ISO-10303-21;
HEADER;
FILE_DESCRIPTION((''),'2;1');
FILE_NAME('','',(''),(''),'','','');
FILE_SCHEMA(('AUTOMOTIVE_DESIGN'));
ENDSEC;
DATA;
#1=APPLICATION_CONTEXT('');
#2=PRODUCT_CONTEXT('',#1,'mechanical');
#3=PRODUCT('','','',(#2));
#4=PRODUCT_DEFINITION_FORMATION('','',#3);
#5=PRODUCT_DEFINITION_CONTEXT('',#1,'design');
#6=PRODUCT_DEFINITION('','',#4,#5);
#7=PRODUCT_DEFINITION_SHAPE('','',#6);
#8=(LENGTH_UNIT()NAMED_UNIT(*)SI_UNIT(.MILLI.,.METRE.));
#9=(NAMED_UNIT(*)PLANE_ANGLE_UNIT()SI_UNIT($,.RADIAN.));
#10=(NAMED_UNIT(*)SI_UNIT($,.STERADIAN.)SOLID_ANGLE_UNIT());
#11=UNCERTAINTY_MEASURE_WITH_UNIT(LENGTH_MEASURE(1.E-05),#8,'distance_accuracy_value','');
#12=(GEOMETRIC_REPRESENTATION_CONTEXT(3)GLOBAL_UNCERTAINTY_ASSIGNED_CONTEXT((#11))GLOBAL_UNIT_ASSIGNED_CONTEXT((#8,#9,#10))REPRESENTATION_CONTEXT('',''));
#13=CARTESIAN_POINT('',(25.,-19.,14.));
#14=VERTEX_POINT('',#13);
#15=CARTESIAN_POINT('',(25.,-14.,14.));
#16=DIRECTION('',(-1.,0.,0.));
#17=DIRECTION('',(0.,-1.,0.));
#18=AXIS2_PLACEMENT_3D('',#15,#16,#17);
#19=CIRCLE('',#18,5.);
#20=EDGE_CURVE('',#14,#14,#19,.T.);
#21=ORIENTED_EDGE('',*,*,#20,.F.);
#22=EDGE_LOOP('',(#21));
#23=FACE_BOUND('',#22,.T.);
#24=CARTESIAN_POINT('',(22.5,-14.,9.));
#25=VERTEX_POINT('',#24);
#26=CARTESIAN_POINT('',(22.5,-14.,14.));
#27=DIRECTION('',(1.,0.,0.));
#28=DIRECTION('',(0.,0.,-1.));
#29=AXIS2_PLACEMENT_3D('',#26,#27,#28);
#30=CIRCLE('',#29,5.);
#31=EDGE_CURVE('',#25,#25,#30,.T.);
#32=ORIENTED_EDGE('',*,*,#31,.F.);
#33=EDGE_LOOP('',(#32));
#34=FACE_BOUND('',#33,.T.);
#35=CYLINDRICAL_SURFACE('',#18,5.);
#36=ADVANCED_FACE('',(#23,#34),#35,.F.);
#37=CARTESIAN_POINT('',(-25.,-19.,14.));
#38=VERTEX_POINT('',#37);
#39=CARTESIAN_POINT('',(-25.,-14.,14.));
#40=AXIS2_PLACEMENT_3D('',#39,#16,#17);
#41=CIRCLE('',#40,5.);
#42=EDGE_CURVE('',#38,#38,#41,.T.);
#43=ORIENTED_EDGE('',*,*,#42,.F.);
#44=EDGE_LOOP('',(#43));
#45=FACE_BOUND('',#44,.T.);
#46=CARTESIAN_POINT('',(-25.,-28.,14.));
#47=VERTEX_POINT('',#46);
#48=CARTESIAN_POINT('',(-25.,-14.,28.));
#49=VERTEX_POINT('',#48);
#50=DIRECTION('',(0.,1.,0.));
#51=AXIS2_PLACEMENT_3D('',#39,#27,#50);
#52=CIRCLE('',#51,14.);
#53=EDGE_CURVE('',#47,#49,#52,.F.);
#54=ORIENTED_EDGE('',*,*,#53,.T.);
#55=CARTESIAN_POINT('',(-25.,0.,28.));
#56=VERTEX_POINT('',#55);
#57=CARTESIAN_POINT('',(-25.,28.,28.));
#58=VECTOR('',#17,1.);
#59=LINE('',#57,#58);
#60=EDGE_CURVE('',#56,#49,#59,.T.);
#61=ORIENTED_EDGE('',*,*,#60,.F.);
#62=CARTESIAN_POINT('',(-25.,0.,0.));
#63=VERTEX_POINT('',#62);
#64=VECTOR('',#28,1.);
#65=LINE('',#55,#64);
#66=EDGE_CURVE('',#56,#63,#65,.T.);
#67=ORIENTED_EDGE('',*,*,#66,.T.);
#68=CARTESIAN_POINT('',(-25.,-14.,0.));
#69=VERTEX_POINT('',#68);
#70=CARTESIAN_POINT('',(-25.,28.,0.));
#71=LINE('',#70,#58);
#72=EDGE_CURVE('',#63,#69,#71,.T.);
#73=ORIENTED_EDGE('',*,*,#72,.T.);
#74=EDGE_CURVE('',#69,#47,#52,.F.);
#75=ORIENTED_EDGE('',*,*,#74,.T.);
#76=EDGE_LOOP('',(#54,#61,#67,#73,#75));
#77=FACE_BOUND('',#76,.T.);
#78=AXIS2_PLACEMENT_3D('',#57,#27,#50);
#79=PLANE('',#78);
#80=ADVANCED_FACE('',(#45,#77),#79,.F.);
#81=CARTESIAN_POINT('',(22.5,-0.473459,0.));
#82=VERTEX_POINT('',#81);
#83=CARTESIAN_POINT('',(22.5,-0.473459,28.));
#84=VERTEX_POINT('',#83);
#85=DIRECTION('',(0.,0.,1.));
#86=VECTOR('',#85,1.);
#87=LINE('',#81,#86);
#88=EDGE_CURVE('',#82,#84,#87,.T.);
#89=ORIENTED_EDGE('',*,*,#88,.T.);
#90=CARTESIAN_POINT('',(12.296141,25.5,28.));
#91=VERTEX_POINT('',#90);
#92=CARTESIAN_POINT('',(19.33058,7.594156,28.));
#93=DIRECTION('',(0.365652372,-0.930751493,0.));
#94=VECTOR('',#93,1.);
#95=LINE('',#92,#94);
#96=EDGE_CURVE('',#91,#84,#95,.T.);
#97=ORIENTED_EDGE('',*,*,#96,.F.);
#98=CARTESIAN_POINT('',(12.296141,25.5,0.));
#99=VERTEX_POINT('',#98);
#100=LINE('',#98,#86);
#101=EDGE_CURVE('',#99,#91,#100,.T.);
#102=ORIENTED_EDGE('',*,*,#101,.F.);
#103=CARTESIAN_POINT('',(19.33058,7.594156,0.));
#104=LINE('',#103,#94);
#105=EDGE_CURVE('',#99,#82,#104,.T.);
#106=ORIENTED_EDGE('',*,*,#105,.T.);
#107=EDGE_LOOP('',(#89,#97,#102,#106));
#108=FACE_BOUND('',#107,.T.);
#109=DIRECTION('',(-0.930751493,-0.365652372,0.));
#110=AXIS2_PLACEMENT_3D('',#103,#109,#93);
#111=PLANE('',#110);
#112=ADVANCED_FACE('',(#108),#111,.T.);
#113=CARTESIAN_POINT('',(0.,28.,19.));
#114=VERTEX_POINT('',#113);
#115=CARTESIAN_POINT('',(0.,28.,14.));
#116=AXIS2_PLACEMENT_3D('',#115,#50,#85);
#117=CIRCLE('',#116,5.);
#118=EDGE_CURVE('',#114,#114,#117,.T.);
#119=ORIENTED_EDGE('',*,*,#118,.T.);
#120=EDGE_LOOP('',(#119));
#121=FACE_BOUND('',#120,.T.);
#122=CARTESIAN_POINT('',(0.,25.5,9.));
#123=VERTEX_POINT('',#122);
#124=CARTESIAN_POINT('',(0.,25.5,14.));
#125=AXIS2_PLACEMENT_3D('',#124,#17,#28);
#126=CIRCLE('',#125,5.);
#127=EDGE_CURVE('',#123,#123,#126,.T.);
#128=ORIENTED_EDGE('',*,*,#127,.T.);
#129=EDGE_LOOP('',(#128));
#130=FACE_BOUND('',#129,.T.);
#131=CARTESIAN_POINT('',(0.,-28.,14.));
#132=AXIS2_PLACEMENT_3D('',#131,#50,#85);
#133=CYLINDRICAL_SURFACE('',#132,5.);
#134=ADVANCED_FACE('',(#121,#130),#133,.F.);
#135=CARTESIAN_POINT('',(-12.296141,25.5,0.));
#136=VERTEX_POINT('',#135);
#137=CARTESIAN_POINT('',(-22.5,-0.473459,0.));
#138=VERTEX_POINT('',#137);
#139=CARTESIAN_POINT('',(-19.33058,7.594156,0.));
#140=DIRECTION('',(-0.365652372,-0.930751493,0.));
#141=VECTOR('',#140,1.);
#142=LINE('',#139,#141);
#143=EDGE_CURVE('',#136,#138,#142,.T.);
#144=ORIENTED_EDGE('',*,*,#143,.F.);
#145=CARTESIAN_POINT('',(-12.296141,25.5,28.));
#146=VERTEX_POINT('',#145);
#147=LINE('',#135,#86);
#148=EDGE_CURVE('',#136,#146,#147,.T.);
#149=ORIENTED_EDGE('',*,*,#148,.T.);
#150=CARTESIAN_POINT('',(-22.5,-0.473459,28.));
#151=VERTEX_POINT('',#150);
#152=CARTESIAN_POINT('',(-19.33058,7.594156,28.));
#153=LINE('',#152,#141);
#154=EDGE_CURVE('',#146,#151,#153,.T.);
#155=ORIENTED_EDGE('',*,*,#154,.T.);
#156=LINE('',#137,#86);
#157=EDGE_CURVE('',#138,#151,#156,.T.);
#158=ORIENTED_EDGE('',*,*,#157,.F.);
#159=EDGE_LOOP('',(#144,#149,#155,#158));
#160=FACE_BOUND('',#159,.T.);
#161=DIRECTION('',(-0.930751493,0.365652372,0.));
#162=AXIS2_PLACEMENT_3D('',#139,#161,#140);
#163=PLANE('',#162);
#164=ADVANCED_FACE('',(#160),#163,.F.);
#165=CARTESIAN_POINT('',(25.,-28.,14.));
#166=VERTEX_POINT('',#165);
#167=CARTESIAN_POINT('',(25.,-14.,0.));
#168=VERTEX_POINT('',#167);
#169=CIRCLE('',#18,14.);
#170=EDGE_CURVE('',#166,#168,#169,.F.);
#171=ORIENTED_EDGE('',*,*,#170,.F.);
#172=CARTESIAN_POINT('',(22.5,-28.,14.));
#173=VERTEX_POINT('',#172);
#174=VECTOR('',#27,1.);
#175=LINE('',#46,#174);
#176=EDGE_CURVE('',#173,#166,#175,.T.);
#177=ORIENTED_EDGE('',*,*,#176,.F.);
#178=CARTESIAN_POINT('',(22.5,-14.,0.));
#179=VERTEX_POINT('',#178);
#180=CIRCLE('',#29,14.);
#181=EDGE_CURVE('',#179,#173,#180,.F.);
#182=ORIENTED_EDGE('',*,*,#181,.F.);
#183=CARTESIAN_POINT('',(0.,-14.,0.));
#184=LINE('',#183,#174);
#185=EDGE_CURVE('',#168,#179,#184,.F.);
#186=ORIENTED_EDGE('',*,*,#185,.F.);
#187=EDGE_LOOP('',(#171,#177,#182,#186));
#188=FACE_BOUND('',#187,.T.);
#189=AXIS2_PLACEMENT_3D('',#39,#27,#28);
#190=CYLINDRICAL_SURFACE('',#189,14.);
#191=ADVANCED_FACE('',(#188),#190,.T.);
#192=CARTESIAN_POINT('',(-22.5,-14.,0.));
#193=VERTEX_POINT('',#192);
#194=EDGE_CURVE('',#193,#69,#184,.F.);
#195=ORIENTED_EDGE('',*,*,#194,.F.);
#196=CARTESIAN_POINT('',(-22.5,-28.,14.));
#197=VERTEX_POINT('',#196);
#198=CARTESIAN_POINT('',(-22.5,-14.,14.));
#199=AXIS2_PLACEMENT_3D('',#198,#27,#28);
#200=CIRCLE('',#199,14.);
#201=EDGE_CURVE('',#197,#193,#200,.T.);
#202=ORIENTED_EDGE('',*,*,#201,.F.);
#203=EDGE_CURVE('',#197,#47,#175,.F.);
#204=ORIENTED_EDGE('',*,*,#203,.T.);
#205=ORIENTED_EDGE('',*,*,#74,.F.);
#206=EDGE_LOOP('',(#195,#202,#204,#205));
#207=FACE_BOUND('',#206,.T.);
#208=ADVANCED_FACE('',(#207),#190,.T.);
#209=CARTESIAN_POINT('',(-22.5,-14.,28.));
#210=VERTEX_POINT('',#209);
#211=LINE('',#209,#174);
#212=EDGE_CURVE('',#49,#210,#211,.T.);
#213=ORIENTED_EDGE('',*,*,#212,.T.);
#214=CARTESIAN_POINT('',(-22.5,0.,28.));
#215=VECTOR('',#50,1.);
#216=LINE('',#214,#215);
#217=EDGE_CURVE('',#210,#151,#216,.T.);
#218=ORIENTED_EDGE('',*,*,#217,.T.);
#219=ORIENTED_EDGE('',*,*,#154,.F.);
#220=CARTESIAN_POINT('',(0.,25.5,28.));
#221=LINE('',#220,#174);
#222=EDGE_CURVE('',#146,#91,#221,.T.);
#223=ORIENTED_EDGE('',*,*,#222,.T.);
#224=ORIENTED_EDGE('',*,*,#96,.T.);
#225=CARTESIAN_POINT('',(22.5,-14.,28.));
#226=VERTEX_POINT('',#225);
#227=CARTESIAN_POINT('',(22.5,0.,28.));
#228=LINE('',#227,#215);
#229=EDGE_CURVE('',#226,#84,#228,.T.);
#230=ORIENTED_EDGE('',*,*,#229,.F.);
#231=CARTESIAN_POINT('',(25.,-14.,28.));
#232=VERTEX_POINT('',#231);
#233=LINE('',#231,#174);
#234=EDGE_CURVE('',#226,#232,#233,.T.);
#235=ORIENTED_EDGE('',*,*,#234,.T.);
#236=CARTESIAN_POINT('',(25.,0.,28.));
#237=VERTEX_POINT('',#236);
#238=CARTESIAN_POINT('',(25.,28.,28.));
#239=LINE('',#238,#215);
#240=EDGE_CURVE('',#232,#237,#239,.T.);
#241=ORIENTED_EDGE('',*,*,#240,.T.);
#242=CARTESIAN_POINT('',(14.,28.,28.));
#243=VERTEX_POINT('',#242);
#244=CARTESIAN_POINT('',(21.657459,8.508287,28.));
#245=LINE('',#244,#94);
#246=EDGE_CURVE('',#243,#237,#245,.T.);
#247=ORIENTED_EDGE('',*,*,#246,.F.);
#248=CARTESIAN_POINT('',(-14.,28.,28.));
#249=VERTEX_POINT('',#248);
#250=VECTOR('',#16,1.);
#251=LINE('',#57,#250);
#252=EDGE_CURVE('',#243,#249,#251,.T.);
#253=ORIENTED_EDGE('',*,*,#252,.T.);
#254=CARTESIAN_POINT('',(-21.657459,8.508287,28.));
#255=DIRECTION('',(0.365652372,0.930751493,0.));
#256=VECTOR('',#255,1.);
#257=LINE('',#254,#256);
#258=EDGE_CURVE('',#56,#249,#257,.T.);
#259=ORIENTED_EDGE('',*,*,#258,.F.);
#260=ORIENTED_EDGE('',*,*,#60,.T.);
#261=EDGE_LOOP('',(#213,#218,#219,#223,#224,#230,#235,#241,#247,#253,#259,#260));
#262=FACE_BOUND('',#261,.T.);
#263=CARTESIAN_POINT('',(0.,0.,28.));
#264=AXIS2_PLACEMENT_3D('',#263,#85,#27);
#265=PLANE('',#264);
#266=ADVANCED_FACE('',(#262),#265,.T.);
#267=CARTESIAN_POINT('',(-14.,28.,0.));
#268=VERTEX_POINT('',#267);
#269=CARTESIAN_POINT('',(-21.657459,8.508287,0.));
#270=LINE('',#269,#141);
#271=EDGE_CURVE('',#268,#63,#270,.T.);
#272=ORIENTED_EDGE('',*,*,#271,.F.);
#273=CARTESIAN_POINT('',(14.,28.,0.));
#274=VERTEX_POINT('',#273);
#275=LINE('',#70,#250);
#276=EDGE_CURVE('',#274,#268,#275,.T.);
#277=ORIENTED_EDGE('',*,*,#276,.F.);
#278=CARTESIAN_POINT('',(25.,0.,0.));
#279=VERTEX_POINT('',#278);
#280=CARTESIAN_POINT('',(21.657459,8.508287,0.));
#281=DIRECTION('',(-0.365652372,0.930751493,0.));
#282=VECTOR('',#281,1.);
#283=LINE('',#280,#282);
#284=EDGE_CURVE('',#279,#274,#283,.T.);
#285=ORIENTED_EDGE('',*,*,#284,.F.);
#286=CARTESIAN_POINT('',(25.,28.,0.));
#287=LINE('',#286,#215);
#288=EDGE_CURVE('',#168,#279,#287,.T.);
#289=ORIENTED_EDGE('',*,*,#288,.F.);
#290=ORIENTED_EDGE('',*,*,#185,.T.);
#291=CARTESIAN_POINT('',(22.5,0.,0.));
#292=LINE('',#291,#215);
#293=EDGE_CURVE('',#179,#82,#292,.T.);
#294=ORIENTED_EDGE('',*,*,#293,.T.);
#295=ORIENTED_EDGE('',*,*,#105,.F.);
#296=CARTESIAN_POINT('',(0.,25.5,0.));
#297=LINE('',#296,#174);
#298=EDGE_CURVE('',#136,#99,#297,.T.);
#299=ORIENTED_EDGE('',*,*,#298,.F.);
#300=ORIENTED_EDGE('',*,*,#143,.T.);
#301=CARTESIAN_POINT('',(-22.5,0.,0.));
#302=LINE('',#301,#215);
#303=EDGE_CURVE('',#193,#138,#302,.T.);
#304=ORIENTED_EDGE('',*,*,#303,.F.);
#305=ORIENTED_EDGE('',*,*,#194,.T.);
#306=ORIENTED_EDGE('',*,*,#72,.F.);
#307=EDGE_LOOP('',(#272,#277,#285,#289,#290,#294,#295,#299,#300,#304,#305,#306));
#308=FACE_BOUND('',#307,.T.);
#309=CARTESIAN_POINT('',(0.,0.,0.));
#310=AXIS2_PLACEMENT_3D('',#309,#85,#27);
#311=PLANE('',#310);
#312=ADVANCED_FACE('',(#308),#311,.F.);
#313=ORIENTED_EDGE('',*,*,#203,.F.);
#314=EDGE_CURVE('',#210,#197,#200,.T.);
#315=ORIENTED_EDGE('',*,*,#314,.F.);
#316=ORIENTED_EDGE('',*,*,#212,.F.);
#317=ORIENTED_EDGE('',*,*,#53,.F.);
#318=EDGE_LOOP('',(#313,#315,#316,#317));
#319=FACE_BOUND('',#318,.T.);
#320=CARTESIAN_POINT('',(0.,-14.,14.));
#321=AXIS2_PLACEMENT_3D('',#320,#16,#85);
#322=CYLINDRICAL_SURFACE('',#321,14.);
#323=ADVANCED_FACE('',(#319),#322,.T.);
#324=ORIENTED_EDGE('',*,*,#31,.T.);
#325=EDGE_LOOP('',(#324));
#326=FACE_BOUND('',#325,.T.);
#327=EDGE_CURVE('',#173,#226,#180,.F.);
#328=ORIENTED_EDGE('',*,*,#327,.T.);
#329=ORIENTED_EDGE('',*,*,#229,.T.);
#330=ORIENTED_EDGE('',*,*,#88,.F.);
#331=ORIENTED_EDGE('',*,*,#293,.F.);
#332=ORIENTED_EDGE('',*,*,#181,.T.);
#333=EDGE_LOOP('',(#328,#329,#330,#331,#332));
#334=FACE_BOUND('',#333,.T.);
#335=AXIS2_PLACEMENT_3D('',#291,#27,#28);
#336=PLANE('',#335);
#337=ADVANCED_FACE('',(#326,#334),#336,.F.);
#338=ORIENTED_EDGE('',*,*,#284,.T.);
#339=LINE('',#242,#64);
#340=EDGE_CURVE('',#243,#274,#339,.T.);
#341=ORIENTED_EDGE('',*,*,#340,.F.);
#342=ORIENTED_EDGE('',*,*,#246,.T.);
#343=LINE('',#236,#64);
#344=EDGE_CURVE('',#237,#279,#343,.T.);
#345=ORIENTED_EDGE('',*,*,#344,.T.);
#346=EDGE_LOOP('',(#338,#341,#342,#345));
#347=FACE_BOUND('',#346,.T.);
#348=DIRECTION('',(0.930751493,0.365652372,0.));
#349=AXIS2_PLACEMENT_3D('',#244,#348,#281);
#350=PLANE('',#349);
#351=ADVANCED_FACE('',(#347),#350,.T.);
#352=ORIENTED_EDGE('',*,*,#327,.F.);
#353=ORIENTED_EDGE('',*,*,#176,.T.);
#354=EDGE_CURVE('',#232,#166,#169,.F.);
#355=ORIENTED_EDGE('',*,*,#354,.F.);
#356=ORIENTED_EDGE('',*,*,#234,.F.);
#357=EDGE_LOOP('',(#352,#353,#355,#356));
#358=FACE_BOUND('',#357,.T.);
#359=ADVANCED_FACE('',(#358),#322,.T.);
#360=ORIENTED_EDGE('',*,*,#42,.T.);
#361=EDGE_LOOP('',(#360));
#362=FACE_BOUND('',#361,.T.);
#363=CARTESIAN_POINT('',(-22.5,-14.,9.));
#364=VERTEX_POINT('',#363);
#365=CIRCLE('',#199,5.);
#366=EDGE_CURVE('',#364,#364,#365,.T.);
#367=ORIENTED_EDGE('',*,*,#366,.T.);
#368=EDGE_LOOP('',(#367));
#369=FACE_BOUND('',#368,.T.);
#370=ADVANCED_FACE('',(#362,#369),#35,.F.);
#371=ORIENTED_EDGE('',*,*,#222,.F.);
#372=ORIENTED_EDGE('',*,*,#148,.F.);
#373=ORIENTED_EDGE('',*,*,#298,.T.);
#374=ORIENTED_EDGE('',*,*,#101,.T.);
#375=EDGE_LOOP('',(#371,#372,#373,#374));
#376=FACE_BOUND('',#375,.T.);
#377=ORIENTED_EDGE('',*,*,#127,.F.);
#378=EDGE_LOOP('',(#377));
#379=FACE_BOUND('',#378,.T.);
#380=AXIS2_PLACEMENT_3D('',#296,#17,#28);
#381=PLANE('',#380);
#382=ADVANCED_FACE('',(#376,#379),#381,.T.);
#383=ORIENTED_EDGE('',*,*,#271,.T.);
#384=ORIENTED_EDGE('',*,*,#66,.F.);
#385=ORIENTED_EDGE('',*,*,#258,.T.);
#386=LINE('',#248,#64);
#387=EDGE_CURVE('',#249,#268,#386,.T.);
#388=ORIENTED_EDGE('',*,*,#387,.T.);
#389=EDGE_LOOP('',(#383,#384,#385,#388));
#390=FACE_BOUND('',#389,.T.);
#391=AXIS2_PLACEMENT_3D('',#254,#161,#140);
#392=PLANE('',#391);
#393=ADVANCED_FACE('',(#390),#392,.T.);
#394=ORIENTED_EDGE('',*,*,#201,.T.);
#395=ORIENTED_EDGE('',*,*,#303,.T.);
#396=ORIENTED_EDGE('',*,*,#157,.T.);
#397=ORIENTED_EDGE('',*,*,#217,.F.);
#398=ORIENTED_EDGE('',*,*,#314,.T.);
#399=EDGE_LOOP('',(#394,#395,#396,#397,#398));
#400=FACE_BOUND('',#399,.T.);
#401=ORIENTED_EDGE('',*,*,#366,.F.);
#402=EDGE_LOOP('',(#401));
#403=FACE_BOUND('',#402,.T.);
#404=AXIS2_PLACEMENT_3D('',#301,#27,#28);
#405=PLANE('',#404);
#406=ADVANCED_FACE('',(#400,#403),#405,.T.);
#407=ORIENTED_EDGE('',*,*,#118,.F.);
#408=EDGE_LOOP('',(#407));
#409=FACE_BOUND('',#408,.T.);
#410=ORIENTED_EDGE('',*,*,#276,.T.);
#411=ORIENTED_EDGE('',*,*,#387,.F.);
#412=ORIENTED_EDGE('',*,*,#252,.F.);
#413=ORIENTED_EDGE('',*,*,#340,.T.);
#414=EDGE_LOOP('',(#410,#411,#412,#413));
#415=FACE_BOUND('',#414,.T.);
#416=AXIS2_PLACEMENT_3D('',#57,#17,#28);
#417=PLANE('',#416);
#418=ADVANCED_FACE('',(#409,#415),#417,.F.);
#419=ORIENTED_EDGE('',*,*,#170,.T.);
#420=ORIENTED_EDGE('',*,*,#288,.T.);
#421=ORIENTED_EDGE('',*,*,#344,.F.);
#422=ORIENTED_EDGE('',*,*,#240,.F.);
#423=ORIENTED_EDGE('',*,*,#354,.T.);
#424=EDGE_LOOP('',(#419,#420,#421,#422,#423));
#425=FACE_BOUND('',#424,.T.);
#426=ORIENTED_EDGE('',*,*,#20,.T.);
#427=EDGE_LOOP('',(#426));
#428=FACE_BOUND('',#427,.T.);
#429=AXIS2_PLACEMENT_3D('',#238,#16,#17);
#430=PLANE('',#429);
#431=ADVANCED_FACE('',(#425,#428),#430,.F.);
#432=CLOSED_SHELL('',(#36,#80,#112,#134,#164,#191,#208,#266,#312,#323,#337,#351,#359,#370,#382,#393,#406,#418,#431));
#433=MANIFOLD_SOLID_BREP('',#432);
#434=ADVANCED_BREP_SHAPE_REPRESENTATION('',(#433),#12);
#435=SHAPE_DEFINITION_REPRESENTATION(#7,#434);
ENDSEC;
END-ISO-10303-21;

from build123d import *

# Parameters (mm, degrees)
ESBO_O1_W                  = 50
ESBO_O1_H                  = 56
RESSALTO_EXTRUS_O1_DEPTH   = 28
CORTE_EXTRUS_O1_DEPTH      = 28
CORTE_EXTRUS_O7_DEPTH      = 28
CORTE_EXTRUS_O7_DEPTH_BACK = 28
ESBO_O7_R                  = 5
CORTE_EXTRUS_O8_DEPTH      = 64.780874876
ESBO_O8_R                  = 5
CORTE_EXTRUS_O9_DEPTH      = 68.416615163
FILETE7_R                  = 14
FILETE8_R                  = 14


with BuildPart() as part:
    # Esboço1 → Ressalto-extrusão1 (new body)
    with BuildSketch(Plane.XY):
        Rectangle(ESBO_O1_W, ESBO_O1_H)
    extrude(amount=RESSALTO_EXTRUS_O1_DEPTH)

    # Esboço5 → Corte-extrusão1 (cut)
    with BuildSketch(Plane.XY.offset(28)):
        Polygon((-22.5, -0.473458617), (-22.5, -28), (22.5, -28), (22.5, -0.473458617), (12.296141258, 25.5), (0, 25.5), (-12.296141258, 25.5), align=None)
    extrude(amount=-CORTE_EXTRUS_O1_DEPTH, mode=Mode.SUBTRACT)

    # Esboço2 → Corte-extrusão7 (cut, two sides: drawn at the far end of the back side and taken through both)
    with BuildSketch(Plane.XY.offset(-CORTE_EXTRUS_O7_DEPTH_BACK)):
        Polygon((-14, 28), (-25, 28), (-25, 0), align=None)
        Polygon((25, 0), (25, 28), (14, 28), align=None)
    extrude(amount=CORTE_EXTRUS_O7_DEPTH + CORTE_EXTRUS_O7_DEPTH_BACK, mode=Mode.SUBTRACT)

    # Esboço7 → Corte-extrusão8 (cut, through all)
    with BuildSketch(Plane.ZY.offset(25)):
        with Locations(Location((14, -14, 0), (0, 0, 270))):
            Circle(ESBO_O7_R)
    extrude(amount=-CORTE_EXTRUS_O8_DEPTH, mode=Mode.SUBTRACT)

    # Esboço8 → Corte-extrusão9 (cut, through all)
    with BuildSketch(Plane(origin=(0, 28, 0), x_dir=(1, 0, 0), z_dir=(0, 1, 0))):
        with Locations(Location((0, -14, 0), (0, 0, 270))):
            Circle(ESBO_O8_R)
    extrude(amount=-CORTE_EXTRUS_O9_DEPTH, mode=Mode.SUBTRACT)

    # Filete7
    filete7_edges = [part.edges().sort_by_distance(p)[0] for p in [
        (-23.75, -28, 0),
        (-23.75, -28, 28),
    ]]
    fillet(filete7_edges, radius=FILETE7_R - 0.0001)  # a hair under: the kernel refuses the full size

    # Filete8
    filete8_edges = [part.edges().sort_by_distance(p)[0] for p in [
        (23.75, -28, 28),
        (23.75, -28, 0),
    ]]
    fillet(filete8_edges, radius=FILETE8_R - 0.0001)  # a hair under: the kernel refuses the full size


solid = part.part
